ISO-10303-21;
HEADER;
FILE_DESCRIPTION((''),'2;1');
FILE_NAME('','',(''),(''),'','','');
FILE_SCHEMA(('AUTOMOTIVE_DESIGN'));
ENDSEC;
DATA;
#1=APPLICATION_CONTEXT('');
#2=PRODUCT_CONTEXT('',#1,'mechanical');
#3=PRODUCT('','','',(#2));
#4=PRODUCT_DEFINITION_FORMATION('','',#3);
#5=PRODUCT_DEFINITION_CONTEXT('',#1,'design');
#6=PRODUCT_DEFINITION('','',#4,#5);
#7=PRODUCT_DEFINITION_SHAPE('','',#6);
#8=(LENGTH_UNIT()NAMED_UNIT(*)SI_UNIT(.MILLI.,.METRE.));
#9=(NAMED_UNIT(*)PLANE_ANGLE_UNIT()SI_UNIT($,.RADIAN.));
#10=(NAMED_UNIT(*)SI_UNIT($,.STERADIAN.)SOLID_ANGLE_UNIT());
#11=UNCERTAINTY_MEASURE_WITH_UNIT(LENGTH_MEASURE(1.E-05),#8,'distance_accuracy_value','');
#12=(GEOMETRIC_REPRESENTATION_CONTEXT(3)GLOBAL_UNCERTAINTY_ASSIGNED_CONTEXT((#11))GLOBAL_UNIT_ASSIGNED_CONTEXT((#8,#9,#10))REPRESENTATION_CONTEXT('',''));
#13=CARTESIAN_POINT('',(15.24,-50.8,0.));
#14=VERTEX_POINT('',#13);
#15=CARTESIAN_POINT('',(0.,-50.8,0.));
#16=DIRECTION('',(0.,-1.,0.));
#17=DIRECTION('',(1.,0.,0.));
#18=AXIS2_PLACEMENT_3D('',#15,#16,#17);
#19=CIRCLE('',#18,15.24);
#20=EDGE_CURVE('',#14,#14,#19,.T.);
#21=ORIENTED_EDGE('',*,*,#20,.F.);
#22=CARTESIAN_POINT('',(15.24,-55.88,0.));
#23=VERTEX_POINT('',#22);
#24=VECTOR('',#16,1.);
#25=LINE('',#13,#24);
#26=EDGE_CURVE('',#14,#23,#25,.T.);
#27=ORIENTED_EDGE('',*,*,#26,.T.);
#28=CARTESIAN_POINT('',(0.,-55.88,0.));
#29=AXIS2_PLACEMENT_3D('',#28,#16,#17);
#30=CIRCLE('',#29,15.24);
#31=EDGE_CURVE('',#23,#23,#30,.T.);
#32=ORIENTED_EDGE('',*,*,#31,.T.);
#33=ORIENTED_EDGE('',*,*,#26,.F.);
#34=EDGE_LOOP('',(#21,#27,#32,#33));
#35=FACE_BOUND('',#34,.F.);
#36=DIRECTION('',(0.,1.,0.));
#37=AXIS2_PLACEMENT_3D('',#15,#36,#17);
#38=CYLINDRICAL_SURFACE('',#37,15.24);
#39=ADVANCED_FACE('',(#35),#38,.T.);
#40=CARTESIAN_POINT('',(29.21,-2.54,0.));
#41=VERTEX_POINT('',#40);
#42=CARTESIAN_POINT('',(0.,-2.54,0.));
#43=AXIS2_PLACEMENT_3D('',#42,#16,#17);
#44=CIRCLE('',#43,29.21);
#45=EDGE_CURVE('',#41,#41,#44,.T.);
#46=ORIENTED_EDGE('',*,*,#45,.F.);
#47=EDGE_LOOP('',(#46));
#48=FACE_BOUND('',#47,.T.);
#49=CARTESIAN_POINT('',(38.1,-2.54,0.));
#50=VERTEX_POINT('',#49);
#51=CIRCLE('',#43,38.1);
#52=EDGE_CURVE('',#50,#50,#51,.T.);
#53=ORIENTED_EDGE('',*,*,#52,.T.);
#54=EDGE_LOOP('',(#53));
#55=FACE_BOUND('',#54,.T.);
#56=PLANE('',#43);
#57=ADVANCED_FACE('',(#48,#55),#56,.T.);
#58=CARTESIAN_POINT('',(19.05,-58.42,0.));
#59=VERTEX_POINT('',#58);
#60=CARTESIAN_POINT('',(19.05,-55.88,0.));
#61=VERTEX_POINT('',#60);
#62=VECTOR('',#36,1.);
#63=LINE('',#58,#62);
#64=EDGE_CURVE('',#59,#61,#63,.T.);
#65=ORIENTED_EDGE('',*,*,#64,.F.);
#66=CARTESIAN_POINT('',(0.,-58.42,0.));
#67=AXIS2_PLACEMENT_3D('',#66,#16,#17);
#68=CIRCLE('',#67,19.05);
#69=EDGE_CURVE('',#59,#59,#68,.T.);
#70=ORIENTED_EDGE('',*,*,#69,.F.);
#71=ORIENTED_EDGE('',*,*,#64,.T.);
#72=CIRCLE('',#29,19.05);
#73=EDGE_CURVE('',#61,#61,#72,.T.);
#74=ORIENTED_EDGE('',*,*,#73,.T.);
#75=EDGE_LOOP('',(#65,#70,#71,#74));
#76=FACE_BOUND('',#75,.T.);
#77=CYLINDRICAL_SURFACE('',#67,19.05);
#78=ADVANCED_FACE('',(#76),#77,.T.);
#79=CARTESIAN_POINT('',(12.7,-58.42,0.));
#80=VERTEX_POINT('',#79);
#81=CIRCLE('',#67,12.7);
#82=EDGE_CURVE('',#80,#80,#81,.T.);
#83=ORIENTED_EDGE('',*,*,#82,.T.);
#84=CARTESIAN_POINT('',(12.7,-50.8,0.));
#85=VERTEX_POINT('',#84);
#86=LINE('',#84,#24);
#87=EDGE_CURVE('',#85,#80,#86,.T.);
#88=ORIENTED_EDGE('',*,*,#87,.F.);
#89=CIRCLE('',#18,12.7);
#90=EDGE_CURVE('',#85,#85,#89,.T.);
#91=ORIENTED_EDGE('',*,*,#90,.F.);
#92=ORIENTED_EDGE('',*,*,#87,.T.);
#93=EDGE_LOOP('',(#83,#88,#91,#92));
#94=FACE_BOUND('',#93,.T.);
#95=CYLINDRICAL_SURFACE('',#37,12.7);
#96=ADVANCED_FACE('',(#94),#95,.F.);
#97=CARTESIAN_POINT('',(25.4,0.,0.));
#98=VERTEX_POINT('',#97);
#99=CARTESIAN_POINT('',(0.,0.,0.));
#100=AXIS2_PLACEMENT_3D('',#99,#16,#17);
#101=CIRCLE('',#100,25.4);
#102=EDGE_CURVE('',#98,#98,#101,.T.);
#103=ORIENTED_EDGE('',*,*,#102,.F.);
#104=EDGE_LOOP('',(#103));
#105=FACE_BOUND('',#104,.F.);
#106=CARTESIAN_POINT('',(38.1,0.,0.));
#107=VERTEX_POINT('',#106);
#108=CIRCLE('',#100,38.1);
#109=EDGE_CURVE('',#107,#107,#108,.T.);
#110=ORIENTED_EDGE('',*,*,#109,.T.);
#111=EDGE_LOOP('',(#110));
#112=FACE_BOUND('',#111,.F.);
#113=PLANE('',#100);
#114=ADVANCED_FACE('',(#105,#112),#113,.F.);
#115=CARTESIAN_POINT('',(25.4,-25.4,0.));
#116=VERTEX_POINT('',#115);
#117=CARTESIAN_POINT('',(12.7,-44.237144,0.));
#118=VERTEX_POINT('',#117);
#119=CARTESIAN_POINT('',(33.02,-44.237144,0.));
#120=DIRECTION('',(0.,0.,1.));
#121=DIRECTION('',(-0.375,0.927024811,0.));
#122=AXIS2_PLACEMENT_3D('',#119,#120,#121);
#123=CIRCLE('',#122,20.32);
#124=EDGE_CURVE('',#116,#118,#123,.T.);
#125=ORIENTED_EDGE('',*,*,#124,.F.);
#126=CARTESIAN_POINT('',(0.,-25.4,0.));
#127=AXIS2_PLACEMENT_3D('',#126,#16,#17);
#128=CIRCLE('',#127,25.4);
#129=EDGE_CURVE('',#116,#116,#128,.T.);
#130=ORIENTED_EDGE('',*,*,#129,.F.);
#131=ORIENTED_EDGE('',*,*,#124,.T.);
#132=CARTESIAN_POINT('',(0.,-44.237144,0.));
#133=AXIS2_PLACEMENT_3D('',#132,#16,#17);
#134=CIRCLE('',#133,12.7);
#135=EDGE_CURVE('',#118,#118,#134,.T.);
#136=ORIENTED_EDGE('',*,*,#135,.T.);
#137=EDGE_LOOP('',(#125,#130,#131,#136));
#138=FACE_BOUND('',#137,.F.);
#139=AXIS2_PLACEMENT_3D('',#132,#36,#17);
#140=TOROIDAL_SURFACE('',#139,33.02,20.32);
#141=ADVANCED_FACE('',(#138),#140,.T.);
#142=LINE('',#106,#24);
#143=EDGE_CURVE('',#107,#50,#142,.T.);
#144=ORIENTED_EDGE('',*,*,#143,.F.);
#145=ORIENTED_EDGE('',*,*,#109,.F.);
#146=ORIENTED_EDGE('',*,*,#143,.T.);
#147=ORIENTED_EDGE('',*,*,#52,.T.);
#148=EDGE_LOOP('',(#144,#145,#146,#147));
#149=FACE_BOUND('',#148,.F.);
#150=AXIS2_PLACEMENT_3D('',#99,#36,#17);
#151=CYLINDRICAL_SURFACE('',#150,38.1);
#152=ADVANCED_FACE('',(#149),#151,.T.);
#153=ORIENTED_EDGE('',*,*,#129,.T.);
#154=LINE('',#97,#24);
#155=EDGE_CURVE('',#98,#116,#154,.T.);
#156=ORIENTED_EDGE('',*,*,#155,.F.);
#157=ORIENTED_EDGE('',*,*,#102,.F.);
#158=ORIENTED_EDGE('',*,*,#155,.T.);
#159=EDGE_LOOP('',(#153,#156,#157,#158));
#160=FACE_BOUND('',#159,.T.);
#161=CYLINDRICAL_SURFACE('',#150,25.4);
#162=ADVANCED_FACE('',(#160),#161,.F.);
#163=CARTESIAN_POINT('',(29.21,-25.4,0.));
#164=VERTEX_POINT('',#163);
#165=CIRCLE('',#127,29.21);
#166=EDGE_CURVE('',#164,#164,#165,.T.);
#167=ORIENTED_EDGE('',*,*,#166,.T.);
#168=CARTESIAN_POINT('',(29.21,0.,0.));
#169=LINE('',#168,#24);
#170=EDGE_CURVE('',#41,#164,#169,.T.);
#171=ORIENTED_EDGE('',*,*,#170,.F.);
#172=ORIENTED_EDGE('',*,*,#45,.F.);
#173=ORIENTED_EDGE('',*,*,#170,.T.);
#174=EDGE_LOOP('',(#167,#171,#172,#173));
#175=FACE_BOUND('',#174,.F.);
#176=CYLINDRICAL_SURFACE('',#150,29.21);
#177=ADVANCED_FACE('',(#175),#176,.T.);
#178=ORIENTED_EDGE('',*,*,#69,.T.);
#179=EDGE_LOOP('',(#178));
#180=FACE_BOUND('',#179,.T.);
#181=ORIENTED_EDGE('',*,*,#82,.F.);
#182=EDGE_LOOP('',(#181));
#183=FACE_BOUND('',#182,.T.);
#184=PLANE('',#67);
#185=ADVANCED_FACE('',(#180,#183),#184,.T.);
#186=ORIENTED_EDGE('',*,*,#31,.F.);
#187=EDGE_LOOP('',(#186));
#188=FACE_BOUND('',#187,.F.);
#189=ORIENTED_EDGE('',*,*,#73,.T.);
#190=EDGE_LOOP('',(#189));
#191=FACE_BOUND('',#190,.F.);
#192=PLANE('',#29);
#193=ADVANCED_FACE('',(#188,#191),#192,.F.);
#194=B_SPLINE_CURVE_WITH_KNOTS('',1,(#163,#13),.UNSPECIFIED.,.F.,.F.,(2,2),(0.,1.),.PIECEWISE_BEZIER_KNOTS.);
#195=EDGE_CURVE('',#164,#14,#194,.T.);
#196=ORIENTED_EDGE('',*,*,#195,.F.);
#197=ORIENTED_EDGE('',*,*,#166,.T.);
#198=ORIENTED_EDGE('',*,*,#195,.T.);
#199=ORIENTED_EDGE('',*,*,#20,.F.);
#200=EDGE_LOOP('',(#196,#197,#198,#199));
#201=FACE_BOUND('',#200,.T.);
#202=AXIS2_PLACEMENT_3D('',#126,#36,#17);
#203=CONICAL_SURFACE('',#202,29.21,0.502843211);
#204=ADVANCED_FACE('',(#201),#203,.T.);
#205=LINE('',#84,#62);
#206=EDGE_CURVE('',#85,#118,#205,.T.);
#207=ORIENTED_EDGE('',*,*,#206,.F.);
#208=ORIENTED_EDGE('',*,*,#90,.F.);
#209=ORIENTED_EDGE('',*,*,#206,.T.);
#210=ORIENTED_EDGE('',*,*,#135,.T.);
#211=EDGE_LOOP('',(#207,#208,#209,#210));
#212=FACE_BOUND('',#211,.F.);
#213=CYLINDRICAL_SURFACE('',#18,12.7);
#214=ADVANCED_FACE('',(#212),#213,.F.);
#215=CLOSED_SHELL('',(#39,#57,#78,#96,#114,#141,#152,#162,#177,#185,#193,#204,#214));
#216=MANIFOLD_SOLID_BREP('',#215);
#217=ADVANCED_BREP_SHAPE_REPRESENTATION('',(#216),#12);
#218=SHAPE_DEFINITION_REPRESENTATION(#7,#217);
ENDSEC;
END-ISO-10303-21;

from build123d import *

# Parameters (mm, degrees)
F0_R      = 29.21
F0_R_2    = 25.4
F1_DEPTH  = 25.4
F0_R_3    = 38.1
F2_DEPTH  = 2.54
F5_R      = 29.21
F4_R      = 15.24
F7_R      = 15.24
F7_R_2    = 12.7
F8_DEPTH  = 7.62
F9_R      = 19.05
F9_R_2    = 15.24
F10_DEPTH = 2.54
F11_DEPTH = 57.658


# Not quite as in the source:
# - a fillet or chamfer that OpenCascade refuses, or shapes differently, is made with other operations: its cross-section is extruded or revolved along the edge and cut away or added


with BuildPart() as f1:
    # F0 (on Front) → F1 (new body)
    with BuildSketch(Plane.XZ):
        Circle(F0_R)
        Circle(F0_R_2, mode=Mode.SUBTRACT)
    extrude(amount=F1_DEPTH)

    # F0 (on Front) → F2 (join)
    with BuildSketch(Plane.XZ):
        Circle(F0_R_3)
        Circle(F0_R, mode=Mode.SUBTRACT)
    extrude(amount=F2_DEPTH)

    # F5 (on face) → F6 section 0
    with BuildSketch(Plane.XZ.offset(25.4)):
        Circle(F5_R)
    # F4 (on offset) → F6 section 1
    with BuildSketch(Plane.XZ.offset(50.8)):
        Circle(F4_R)
    loft()

    # F7 (on face) → F8 (join)
    with BuildSketch(Plane.XZ.offset(50.8)):
        Circle(F7_R)
        Circle(F7_R_2, mode=Mode.SUBTRACT)
    extrude(amount=F8_DEPTH)

    # F9 (on face) → F10 (join)
    with BuildSketch(Plane.XZ.offset(58.42)):
        Circle(F9_R)
        Circle(F9_R_2, mode=Mode.SUBTRACT)
    extrude(amount=-F10_DEPTH)

    # F11 (cut): a face of the model
    f11_faces = [f1.faces().sort_by_distance(p)[0] for p in [
        (0, -50.8, 0),
    ]]
    extrude(f11_faces, amount=-F11_DEPTH, mode=Mode.SUBTRACT)

    # F12: fillet of radius 20.32 on 1 edges, made by hand

    # F12_s1 → F12_t2 (revolve, cut)
    with BuildSketch(Plane.XY):
        with BuildLine():
            ThreePointArc((25.4, -25.4), (16.171546065, -32.8779188315), (12.7, -44.2371441572))
            Line((12.7, -44.2371441572), (12.7, -25.4))
            Line((12.7, -25.4), (25.4, -25.4))
        make_face()
    revolve(axis=Axis((0, -25.4, 0), (0, -1, 0)), mode=Mode.SUBTRACT)


solid = f1.part
